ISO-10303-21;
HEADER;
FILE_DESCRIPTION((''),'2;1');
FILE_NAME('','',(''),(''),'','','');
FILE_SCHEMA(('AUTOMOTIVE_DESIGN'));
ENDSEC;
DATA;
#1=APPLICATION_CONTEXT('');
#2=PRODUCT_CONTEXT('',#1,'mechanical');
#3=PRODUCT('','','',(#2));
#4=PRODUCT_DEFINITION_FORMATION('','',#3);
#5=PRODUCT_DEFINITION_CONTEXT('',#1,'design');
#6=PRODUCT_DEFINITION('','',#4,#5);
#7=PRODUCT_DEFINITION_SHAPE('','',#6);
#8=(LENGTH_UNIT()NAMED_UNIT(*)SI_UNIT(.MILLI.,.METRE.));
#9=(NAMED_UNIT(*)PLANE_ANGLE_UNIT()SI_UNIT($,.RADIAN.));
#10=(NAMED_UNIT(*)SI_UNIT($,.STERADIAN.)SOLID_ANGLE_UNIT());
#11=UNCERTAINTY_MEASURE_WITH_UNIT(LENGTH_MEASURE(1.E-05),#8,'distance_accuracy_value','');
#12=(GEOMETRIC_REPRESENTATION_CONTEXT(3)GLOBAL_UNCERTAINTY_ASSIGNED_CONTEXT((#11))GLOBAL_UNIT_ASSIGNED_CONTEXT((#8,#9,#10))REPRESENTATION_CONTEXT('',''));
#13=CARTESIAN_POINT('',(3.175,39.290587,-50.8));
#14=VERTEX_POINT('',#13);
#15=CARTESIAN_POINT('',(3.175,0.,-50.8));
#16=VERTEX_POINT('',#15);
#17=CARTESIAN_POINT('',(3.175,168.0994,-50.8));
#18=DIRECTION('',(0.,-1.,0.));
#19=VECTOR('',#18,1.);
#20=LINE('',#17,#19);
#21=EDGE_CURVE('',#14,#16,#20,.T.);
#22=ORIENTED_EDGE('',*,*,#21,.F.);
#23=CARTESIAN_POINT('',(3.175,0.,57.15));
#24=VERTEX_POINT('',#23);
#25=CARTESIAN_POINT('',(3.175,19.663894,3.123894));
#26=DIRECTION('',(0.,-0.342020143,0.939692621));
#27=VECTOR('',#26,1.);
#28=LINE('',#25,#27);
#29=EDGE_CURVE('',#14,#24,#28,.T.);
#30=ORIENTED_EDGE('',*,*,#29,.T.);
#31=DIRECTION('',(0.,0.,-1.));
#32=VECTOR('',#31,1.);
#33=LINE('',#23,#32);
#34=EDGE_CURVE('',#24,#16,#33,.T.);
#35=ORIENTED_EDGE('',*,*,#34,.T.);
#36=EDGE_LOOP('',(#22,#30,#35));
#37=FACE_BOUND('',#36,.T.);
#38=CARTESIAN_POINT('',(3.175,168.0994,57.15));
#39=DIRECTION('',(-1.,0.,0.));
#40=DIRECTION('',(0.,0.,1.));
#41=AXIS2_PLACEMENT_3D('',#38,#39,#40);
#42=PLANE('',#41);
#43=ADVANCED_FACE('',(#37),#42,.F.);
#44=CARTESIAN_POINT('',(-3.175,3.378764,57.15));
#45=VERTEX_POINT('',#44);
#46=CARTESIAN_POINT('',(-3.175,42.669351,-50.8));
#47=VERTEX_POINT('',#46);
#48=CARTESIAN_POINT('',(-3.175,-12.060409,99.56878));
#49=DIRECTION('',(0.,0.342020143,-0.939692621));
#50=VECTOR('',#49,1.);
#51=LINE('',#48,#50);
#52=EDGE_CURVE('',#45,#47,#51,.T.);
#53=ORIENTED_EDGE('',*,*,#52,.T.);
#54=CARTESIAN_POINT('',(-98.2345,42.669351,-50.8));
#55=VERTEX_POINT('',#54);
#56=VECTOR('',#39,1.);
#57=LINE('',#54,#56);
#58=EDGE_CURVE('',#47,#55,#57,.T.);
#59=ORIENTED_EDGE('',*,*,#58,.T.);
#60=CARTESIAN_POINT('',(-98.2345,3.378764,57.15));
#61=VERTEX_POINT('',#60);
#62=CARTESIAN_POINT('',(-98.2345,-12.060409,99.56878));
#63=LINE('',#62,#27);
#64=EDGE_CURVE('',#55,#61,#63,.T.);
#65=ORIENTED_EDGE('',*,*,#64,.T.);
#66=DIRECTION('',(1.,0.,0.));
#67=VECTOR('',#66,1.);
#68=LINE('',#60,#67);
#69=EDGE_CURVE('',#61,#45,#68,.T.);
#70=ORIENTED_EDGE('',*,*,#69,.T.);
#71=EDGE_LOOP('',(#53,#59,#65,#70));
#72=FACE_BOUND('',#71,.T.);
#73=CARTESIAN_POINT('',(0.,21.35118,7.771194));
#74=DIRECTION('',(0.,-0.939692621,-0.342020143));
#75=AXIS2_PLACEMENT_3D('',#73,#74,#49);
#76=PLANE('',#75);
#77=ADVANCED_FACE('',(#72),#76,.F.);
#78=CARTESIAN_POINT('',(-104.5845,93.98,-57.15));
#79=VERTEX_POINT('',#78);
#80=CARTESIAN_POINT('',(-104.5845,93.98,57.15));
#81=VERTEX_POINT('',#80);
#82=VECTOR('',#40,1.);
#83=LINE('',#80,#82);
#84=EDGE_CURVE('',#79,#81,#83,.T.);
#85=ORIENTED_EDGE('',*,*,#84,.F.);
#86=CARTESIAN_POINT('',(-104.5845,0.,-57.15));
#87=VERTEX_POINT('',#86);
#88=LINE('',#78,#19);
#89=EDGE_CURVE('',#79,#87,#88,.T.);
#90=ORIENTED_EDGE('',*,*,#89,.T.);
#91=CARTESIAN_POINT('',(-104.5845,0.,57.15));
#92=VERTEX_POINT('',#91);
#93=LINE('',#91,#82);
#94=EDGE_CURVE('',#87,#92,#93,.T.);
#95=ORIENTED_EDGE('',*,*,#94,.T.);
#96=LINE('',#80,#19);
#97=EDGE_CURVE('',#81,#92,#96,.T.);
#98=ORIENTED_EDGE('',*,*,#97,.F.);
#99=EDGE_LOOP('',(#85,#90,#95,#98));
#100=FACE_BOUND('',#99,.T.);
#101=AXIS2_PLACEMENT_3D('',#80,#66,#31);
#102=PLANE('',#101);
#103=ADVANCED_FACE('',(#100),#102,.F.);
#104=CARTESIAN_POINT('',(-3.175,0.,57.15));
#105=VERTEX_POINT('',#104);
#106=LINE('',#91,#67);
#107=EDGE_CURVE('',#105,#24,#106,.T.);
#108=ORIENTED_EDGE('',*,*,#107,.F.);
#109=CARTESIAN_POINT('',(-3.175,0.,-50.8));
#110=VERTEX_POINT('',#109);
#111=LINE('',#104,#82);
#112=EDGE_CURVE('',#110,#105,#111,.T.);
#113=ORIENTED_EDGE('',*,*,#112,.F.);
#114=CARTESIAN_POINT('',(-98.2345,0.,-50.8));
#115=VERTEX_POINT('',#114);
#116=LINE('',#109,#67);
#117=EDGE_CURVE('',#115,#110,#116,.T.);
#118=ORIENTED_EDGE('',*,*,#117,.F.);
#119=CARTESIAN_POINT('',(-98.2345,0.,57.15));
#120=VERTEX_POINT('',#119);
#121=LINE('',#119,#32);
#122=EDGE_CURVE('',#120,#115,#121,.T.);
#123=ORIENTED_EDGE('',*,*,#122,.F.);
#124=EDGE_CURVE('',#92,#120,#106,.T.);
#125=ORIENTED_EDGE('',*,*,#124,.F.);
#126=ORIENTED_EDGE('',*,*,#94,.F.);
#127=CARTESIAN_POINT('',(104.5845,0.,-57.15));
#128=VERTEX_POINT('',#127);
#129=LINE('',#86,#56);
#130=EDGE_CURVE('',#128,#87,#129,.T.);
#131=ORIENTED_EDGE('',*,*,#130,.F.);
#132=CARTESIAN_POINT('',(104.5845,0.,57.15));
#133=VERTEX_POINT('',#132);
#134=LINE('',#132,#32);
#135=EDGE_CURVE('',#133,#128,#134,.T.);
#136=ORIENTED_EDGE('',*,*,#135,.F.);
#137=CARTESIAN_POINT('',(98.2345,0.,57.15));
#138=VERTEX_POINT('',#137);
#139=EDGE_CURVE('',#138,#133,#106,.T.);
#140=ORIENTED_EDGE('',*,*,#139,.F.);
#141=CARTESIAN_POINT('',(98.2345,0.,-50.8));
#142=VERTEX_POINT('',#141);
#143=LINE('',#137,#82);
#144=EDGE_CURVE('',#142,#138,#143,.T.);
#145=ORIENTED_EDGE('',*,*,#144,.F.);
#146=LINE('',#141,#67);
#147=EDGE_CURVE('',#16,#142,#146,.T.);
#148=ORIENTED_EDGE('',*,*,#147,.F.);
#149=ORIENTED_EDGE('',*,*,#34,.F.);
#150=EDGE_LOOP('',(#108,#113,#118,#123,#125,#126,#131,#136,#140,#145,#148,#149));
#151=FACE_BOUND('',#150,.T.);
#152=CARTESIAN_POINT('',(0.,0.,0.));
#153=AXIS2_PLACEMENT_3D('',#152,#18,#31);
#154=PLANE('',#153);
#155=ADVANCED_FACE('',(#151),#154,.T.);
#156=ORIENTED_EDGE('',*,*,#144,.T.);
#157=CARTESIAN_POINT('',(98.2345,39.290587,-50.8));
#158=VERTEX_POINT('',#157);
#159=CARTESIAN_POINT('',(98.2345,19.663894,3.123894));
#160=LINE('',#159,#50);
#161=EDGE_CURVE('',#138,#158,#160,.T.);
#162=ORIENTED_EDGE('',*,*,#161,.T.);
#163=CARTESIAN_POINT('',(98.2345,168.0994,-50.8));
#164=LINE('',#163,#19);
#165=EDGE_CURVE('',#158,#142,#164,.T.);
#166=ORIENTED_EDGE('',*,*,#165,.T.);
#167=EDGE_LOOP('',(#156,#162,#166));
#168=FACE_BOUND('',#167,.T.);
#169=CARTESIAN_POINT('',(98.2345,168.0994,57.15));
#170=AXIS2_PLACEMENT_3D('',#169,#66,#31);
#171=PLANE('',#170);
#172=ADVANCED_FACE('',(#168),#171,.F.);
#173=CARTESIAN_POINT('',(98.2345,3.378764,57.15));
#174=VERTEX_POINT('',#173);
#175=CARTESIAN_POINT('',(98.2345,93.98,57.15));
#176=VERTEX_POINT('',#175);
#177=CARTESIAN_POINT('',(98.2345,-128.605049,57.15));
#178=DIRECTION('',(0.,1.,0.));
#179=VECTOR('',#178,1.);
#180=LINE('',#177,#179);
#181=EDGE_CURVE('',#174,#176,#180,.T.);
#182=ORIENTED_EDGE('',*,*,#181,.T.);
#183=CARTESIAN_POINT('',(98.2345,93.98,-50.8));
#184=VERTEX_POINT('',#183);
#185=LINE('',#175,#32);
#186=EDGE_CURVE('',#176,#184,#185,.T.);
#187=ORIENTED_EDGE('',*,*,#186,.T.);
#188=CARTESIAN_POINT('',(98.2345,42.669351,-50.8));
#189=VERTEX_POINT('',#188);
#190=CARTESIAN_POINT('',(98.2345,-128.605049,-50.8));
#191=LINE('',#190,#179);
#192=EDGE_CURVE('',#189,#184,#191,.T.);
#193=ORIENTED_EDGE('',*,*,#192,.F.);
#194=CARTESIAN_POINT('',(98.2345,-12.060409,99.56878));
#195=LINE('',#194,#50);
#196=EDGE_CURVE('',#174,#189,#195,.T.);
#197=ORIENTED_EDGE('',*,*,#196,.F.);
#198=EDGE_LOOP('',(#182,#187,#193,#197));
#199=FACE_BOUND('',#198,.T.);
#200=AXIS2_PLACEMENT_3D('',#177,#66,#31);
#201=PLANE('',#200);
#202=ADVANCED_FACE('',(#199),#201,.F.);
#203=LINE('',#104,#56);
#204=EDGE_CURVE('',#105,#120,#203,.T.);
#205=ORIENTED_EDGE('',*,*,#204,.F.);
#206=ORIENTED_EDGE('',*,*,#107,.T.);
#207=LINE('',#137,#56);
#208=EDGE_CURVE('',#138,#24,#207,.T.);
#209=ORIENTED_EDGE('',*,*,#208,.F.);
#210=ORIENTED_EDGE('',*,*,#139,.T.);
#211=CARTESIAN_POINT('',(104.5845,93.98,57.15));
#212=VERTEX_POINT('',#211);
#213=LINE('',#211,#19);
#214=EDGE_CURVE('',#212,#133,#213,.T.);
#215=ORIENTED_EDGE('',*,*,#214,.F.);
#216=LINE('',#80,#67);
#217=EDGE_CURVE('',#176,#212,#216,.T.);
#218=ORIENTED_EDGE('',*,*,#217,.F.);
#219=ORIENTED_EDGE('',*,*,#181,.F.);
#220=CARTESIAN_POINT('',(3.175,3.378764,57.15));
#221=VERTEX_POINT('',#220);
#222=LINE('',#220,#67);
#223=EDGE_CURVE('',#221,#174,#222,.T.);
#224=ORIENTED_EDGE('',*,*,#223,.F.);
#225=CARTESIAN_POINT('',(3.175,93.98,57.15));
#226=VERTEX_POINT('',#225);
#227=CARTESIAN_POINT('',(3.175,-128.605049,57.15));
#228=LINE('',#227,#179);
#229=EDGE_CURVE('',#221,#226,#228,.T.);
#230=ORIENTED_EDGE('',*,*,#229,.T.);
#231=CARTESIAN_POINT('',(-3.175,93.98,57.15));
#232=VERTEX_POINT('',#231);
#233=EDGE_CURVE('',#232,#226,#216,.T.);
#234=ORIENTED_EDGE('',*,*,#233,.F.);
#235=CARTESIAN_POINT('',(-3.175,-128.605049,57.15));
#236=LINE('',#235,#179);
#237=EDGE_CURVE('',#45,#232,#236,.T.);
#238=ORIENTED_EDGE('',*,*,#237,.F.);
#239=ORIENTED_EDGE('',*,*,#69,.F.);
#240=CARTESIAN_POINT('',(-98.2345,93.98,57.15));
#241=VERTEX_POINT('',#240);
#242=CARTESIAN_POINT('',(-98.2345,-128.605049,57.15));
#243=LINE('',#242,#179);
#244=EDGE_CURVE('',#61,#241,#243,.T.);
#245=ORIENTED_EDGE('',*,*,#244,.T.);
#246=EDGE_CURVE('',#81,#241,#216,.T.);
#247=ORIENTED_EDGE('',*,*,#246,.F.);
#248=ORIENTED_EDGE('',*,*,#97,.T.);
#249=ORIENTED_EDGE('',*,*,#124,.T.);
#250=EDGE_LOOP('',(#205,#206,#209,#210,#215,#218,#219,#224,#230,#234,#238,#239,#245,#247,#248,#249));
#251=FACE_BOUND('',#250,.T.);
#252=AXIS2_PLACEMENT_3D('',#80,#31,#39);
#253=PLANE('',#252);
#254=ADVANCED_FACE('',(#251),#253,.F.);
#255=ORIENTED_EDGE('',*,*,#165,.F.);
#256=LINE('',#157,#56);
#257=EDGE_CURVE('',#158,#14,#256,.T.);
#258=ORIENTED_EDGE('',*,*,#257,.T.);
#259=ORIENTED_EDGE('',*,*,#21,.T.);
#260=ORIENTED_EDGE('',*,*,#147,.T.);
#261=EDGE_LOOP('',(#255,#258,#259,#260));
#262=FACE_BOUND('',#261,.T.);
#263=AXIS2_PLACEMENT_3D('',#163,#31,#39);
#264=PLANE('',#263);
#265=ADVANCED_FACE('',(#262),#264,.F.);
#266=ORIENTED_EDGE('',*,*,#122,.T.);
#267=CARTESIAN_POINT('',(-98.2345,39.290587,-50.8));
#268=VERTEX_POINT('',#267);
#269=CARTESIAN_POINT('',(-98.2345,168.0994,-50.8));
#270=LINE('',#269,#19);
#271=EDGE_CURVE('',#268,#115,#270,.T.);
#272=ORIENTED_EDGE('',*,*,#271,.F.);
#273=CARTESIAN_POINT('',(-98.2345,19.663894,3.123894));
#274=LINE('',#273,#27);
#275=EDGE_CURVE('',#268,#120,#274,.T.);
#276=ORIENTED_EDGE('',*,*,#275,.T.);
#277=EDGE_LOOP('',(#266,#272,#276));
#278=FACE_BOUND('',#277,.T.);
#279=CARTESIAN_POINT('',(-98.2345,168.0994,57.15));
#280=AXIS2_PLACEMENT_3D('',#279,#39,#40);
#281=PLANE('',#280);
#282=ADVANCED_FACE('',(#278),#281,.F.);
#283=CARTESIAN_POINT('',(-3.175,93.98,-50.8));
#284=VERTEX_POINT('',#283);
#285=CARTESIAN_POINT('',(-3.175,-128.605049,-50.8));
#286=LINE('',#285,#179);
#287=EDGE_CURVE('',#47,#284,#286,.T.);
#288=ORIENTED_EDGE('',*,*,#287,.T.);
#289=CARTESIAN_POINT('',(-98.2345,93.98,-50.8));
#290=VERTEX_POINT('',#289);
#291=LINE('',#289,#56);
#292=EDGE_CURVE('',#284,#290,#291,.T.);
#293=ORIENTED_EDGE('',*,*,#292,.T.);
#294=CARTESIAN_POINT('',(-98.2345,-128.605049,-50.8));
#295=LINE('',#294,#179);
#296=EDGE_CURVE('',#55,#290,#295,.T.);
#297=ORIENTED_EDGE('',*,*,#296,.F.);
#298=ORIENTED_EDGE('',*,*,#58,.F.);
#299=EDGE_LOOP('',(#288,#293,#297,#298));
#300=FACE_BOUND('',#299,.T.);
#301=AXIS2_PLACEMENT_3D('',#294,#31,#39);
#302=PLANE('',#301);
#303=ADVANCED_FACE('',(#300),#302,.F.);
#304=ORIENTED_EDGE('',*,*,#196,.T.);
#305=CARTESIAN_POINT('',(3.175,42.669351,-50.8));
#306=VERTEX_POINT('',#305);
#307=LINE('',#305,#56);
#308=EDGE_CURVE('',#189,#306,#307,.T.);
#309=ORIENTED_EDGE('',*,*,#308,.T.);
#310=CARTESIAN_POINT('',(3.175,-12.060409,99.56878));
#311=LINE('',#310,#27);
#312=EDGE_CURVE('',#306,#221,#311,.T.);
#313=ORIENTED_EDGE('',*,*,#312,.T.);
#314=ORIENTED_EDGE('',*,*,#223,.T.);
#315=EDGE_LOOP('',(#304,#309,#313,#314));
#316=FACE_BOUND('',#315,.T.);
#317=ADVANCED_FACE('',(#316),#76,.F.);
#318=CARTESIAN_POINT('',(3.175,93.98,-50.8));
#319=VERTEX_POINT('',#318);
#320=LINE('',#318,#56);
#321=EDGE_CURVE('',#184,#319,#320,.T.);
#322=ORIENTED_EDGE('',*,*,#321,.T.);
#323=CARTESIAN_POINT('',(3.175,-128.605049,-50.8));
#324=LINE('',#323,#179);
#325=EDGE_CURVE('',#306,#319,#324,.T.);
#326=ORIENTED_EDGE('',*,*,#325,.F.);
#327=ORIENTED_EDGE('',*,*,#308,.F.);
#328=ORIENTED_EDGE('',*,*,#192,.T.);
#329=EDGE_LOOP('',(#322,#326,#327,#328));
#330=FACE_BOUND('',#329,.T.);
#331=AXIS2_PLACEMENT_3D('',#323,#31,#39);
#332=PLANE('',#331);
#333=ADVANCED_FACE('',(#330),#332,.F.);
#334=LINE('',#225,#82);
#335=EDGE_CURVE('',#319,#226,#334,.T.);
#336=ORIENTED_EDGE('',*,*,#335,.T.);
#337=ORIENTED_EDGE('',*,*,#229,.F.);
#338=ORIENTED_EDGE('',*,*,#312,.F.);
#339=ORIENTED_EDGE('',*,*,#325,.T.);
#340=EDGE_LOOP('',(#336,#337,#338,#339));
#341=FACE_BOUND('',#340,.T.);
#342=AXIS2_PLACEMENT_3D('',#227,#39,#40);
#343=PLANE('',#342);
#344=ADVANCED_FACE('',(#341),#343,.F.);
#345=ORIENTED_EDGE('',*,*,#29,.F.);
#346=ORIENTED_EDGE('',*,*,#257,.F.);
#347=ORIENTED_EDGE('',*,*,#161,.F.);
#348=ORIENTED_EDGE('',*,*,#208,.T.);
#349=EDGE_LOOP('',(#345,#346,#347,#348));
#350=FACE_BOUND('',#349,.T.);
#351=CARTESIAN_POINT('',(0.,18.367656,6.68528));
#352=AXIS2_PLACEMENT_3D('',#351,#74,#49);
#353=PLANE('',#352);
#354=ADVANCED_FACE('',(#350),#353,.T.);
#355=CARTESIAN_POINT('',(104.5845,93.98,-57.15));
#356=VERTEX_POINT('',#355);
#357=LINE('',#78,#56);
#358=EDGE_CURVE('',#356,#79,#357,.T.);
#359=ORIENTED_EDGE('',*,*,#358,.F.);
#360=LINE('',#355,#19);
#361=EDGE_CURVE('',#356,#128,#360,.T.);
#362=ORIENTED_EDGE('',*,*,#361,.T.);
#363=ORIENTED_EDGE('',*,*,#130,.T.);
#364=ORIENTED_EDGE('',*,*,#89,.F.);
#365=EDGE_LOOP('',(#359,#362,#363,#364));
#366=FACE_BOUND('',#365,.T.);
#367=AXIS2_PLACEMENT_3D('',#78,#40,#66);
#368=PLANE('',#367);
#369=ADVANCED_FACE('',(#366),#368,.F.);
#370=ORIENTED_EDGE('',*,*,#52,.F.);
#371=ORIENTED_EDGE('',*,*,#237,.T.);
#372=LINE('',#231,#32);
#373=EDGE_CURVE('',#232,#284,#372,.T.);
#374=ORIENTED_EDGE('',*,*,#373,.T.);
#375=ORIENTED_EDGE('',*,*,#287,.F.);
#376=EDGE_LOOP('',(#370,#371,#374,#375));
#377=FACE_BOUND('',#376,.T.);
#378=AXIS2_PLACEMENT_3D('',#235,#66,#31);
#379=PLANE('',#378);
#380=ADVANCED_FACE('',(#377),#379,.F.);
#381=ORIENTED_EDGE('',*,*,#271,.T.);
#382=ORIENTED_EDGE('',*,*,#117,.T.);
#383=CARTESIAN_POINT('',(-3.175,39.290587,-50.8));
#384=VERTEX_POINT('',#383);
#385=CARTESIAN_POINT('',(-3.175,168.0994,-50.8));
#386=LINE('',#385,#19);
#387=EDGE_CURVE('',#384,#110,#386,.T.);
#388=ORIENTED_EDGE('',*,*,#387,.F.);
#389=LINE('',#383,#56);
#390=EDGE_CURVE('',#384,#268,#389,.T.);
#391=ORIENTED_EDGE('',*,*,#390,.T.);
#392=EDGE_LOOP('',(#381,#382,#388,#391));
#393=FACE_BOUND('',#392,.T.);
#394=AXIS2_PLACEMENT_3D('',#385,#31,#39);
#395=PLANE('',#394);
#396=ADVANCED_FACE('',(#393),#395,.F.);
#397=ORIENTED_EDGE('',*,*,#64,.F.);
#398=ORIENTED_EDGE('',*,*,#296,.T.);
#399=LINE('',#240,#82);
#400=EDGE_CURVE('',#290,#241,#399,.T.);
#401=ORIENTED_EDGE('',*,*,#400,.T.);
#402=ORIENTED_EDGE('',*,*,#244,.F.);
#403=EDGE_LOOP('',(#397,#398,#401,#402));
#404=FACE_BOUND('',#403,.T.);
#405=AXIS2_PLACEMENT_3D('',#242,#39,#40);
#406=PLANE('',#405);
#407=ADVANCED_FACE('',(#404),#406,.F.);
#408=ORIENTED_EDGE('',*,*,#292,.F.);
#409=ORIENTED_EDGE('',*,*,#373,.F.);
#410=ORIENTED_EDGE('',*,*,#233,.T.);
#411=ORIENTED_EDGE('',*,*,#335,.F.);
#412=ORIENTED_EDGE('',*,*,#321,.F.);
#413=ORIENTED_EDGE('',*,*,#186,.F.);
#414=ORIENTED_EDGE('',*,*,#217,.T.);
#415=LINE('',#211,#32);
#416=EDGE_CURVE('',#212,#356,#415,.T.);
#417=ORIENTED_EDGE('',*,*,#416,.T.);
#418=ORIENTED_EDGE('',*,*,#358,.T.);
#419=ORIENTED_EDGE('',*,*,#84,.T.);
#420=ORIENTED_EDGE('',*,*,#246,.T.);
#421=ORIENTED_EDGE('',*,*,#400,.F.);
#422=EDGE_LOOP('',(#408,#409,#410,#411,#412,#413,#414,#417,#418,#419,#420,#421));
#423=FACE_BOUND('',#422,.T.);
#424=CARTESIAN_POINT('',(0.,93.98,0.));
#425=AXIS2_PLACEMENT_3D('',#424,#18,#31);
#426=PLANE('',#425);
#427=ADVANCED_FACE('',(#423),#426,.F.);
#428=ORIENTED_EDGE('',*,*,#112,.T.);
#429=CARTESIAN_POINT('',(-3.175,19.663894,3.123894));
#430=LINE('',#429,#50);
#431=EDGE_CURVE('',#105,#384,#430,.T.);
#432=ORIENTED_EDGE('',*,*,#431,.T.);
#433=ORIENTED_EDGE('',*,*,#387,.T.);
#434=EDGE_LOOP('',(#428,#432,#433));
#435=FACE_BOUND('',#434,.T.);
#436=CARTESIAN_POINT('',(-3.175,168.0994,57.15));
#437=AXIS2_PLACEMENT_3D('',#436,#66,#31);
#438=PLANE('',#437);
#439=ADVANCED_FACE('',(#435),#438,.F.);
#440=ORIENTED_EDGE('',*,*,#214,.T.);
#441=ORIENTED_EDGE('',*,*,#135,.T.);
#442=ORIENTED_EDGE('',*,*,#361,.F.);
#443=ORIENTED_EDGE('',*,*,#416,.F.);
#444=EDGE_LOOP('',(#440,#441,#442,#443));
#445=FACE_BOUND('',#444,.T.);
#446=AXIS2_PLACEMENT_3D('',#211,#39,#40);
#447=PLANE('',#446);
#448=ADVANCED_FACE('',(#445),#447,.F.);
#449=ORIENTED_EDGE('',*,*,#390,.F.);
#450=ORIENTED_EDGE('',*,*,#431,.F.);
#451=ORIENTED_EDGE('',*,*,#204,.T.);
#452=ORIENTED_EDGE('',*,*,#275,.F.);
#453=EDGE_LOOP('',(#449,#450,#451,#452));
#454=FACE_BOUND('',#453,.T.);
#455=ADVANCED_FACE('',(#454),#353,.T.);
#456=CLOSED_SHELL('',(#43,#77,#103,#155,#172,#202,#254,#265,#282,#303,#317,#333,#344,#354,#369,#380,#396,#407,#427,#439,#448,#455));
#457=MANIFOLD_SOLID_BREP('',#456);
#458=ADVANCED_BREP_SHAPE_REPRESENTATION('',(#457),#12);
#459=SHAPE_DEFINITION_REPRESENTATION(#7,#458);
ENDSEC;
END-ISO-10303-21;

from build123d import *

# Parameters (mm, degrees)
SKETCH1_W            = 209.169
SKETCH1_H            = 114.3
BOX_DEPTH            = 93.98
CUT_EXTRUDE1_REACH   = 153.777
SKETCH2_W            = 95.0595
SKETCH2_H            = 107.95
CUT_EXTRUDE2_START   = -98.2345
CUT_EXTRUDE2_DEPTH   = 95.0595
CUT_EXTRUDE2_START_2 = 3.175
CUT_EXTRUDE2_2_DEPTH = 95.0595


# Read off the part's stored shape, not the designer's step: Cut-Extrude2
with BuildPart() as part:
    # Sketch1 → Box (new body)
    with BuildSketch(Plane(origin=(0, 0, 0), x_dir=(1, 0, 0), z_dir=(0, 1, 0))):
        Rectangle(SKETCH1_W, SKETCH1_H)
    extrude(amount=BOX_DEPTH)

    # Cut-Extrude1: up to this plane
    cut_extrude1_end = Plane(origin=(0, 21.351180018, 7.771193993), z_dir=(0, -0.9396926207859081, -0.34202014332566943))
    # Sketch2 → Cut-Extrude1 (cut, up to the surface)
    with BuildSketch(Plane(origin=(0, 93.98, 0), x_dir=(1, 0, 0), z_dir=(0, 1, 0)), mode=Mode.PRIVATE) as cut_extrude1_sk1:
        with Locations((-50.70475, -3.175)):
            Rectangle(SKETCH2_W, SKETCH2_H)
    cut_extrude1_tool1 = split(extrude(cut_extrude1_sk1.sketch, amount=-CUT_EXTRUDE1_REACH, mode=Mode.PRIVATE), bisect_by=cut_extrude1_end, keep=Keep.BOTH, mode=Mode.PRIVATE)
    add(cut_extrude1_tool1.solids().sort_by_distance((-50.70475, 93.98, 3.175))[0], mode=Mode.SUBTRACT)
    # Sketch2 → Cut-Extrude1 (cut, up to the surface)
    with BuildSketch(Plane(origin=(0, 93.98, 0), x_dir=(1, 0, 0), z_dir=(0, 1, 0)), mode=Mode.PRIVATE) as cut_extrude1_sk2:
        with Locations((50.70475, -3.175)):
            Rectangle(SKETCH2_W, SKETCH2_H)
    cut_extrude1_tool2 = split(extrude(cut_extrude1_sk2.sketch, amount=-CUT_EXTRUDE1_REACH, mode=Mode.PRIVATE), bisect_by=cut_extrude1_end, keep=Keep.BOTH, mode=Mode.PRIVATE)
    add(cut_extrude1_tool2.solids().sort_by_distance((50.70475, 93.98, 3.175))[0], mode=Mode.SUBTRACT)

    # Cut-Extrude2 outline → Cut-Extrude2 (cut)
    with BuildSketch(Plane.YZ.offset(CUT_EXTRUDE2_START)):
        Polygon((0, 57.15), (0, -50.8), (39.290586789, -50.8), align=None)
    extrude(amount=CUT_EXTRUDE2_DEPTH, mode=Mode.SUBTRACT)

    # Cut-Extrude2 2 outline → Cut-Extrude2 2 (cut)
    with BuildSketch(Plane.YZ.offset(CUT_EXTRUDE2_START_2)):
        Polygon((0, 57.15), (0, -50.8), (39.290586789, -50.8), align=None)
    extrude(amount=CUT_EXTRUDE2_2_DEPTH, mode=Mode.SUBTRACT)


solid = part.part
